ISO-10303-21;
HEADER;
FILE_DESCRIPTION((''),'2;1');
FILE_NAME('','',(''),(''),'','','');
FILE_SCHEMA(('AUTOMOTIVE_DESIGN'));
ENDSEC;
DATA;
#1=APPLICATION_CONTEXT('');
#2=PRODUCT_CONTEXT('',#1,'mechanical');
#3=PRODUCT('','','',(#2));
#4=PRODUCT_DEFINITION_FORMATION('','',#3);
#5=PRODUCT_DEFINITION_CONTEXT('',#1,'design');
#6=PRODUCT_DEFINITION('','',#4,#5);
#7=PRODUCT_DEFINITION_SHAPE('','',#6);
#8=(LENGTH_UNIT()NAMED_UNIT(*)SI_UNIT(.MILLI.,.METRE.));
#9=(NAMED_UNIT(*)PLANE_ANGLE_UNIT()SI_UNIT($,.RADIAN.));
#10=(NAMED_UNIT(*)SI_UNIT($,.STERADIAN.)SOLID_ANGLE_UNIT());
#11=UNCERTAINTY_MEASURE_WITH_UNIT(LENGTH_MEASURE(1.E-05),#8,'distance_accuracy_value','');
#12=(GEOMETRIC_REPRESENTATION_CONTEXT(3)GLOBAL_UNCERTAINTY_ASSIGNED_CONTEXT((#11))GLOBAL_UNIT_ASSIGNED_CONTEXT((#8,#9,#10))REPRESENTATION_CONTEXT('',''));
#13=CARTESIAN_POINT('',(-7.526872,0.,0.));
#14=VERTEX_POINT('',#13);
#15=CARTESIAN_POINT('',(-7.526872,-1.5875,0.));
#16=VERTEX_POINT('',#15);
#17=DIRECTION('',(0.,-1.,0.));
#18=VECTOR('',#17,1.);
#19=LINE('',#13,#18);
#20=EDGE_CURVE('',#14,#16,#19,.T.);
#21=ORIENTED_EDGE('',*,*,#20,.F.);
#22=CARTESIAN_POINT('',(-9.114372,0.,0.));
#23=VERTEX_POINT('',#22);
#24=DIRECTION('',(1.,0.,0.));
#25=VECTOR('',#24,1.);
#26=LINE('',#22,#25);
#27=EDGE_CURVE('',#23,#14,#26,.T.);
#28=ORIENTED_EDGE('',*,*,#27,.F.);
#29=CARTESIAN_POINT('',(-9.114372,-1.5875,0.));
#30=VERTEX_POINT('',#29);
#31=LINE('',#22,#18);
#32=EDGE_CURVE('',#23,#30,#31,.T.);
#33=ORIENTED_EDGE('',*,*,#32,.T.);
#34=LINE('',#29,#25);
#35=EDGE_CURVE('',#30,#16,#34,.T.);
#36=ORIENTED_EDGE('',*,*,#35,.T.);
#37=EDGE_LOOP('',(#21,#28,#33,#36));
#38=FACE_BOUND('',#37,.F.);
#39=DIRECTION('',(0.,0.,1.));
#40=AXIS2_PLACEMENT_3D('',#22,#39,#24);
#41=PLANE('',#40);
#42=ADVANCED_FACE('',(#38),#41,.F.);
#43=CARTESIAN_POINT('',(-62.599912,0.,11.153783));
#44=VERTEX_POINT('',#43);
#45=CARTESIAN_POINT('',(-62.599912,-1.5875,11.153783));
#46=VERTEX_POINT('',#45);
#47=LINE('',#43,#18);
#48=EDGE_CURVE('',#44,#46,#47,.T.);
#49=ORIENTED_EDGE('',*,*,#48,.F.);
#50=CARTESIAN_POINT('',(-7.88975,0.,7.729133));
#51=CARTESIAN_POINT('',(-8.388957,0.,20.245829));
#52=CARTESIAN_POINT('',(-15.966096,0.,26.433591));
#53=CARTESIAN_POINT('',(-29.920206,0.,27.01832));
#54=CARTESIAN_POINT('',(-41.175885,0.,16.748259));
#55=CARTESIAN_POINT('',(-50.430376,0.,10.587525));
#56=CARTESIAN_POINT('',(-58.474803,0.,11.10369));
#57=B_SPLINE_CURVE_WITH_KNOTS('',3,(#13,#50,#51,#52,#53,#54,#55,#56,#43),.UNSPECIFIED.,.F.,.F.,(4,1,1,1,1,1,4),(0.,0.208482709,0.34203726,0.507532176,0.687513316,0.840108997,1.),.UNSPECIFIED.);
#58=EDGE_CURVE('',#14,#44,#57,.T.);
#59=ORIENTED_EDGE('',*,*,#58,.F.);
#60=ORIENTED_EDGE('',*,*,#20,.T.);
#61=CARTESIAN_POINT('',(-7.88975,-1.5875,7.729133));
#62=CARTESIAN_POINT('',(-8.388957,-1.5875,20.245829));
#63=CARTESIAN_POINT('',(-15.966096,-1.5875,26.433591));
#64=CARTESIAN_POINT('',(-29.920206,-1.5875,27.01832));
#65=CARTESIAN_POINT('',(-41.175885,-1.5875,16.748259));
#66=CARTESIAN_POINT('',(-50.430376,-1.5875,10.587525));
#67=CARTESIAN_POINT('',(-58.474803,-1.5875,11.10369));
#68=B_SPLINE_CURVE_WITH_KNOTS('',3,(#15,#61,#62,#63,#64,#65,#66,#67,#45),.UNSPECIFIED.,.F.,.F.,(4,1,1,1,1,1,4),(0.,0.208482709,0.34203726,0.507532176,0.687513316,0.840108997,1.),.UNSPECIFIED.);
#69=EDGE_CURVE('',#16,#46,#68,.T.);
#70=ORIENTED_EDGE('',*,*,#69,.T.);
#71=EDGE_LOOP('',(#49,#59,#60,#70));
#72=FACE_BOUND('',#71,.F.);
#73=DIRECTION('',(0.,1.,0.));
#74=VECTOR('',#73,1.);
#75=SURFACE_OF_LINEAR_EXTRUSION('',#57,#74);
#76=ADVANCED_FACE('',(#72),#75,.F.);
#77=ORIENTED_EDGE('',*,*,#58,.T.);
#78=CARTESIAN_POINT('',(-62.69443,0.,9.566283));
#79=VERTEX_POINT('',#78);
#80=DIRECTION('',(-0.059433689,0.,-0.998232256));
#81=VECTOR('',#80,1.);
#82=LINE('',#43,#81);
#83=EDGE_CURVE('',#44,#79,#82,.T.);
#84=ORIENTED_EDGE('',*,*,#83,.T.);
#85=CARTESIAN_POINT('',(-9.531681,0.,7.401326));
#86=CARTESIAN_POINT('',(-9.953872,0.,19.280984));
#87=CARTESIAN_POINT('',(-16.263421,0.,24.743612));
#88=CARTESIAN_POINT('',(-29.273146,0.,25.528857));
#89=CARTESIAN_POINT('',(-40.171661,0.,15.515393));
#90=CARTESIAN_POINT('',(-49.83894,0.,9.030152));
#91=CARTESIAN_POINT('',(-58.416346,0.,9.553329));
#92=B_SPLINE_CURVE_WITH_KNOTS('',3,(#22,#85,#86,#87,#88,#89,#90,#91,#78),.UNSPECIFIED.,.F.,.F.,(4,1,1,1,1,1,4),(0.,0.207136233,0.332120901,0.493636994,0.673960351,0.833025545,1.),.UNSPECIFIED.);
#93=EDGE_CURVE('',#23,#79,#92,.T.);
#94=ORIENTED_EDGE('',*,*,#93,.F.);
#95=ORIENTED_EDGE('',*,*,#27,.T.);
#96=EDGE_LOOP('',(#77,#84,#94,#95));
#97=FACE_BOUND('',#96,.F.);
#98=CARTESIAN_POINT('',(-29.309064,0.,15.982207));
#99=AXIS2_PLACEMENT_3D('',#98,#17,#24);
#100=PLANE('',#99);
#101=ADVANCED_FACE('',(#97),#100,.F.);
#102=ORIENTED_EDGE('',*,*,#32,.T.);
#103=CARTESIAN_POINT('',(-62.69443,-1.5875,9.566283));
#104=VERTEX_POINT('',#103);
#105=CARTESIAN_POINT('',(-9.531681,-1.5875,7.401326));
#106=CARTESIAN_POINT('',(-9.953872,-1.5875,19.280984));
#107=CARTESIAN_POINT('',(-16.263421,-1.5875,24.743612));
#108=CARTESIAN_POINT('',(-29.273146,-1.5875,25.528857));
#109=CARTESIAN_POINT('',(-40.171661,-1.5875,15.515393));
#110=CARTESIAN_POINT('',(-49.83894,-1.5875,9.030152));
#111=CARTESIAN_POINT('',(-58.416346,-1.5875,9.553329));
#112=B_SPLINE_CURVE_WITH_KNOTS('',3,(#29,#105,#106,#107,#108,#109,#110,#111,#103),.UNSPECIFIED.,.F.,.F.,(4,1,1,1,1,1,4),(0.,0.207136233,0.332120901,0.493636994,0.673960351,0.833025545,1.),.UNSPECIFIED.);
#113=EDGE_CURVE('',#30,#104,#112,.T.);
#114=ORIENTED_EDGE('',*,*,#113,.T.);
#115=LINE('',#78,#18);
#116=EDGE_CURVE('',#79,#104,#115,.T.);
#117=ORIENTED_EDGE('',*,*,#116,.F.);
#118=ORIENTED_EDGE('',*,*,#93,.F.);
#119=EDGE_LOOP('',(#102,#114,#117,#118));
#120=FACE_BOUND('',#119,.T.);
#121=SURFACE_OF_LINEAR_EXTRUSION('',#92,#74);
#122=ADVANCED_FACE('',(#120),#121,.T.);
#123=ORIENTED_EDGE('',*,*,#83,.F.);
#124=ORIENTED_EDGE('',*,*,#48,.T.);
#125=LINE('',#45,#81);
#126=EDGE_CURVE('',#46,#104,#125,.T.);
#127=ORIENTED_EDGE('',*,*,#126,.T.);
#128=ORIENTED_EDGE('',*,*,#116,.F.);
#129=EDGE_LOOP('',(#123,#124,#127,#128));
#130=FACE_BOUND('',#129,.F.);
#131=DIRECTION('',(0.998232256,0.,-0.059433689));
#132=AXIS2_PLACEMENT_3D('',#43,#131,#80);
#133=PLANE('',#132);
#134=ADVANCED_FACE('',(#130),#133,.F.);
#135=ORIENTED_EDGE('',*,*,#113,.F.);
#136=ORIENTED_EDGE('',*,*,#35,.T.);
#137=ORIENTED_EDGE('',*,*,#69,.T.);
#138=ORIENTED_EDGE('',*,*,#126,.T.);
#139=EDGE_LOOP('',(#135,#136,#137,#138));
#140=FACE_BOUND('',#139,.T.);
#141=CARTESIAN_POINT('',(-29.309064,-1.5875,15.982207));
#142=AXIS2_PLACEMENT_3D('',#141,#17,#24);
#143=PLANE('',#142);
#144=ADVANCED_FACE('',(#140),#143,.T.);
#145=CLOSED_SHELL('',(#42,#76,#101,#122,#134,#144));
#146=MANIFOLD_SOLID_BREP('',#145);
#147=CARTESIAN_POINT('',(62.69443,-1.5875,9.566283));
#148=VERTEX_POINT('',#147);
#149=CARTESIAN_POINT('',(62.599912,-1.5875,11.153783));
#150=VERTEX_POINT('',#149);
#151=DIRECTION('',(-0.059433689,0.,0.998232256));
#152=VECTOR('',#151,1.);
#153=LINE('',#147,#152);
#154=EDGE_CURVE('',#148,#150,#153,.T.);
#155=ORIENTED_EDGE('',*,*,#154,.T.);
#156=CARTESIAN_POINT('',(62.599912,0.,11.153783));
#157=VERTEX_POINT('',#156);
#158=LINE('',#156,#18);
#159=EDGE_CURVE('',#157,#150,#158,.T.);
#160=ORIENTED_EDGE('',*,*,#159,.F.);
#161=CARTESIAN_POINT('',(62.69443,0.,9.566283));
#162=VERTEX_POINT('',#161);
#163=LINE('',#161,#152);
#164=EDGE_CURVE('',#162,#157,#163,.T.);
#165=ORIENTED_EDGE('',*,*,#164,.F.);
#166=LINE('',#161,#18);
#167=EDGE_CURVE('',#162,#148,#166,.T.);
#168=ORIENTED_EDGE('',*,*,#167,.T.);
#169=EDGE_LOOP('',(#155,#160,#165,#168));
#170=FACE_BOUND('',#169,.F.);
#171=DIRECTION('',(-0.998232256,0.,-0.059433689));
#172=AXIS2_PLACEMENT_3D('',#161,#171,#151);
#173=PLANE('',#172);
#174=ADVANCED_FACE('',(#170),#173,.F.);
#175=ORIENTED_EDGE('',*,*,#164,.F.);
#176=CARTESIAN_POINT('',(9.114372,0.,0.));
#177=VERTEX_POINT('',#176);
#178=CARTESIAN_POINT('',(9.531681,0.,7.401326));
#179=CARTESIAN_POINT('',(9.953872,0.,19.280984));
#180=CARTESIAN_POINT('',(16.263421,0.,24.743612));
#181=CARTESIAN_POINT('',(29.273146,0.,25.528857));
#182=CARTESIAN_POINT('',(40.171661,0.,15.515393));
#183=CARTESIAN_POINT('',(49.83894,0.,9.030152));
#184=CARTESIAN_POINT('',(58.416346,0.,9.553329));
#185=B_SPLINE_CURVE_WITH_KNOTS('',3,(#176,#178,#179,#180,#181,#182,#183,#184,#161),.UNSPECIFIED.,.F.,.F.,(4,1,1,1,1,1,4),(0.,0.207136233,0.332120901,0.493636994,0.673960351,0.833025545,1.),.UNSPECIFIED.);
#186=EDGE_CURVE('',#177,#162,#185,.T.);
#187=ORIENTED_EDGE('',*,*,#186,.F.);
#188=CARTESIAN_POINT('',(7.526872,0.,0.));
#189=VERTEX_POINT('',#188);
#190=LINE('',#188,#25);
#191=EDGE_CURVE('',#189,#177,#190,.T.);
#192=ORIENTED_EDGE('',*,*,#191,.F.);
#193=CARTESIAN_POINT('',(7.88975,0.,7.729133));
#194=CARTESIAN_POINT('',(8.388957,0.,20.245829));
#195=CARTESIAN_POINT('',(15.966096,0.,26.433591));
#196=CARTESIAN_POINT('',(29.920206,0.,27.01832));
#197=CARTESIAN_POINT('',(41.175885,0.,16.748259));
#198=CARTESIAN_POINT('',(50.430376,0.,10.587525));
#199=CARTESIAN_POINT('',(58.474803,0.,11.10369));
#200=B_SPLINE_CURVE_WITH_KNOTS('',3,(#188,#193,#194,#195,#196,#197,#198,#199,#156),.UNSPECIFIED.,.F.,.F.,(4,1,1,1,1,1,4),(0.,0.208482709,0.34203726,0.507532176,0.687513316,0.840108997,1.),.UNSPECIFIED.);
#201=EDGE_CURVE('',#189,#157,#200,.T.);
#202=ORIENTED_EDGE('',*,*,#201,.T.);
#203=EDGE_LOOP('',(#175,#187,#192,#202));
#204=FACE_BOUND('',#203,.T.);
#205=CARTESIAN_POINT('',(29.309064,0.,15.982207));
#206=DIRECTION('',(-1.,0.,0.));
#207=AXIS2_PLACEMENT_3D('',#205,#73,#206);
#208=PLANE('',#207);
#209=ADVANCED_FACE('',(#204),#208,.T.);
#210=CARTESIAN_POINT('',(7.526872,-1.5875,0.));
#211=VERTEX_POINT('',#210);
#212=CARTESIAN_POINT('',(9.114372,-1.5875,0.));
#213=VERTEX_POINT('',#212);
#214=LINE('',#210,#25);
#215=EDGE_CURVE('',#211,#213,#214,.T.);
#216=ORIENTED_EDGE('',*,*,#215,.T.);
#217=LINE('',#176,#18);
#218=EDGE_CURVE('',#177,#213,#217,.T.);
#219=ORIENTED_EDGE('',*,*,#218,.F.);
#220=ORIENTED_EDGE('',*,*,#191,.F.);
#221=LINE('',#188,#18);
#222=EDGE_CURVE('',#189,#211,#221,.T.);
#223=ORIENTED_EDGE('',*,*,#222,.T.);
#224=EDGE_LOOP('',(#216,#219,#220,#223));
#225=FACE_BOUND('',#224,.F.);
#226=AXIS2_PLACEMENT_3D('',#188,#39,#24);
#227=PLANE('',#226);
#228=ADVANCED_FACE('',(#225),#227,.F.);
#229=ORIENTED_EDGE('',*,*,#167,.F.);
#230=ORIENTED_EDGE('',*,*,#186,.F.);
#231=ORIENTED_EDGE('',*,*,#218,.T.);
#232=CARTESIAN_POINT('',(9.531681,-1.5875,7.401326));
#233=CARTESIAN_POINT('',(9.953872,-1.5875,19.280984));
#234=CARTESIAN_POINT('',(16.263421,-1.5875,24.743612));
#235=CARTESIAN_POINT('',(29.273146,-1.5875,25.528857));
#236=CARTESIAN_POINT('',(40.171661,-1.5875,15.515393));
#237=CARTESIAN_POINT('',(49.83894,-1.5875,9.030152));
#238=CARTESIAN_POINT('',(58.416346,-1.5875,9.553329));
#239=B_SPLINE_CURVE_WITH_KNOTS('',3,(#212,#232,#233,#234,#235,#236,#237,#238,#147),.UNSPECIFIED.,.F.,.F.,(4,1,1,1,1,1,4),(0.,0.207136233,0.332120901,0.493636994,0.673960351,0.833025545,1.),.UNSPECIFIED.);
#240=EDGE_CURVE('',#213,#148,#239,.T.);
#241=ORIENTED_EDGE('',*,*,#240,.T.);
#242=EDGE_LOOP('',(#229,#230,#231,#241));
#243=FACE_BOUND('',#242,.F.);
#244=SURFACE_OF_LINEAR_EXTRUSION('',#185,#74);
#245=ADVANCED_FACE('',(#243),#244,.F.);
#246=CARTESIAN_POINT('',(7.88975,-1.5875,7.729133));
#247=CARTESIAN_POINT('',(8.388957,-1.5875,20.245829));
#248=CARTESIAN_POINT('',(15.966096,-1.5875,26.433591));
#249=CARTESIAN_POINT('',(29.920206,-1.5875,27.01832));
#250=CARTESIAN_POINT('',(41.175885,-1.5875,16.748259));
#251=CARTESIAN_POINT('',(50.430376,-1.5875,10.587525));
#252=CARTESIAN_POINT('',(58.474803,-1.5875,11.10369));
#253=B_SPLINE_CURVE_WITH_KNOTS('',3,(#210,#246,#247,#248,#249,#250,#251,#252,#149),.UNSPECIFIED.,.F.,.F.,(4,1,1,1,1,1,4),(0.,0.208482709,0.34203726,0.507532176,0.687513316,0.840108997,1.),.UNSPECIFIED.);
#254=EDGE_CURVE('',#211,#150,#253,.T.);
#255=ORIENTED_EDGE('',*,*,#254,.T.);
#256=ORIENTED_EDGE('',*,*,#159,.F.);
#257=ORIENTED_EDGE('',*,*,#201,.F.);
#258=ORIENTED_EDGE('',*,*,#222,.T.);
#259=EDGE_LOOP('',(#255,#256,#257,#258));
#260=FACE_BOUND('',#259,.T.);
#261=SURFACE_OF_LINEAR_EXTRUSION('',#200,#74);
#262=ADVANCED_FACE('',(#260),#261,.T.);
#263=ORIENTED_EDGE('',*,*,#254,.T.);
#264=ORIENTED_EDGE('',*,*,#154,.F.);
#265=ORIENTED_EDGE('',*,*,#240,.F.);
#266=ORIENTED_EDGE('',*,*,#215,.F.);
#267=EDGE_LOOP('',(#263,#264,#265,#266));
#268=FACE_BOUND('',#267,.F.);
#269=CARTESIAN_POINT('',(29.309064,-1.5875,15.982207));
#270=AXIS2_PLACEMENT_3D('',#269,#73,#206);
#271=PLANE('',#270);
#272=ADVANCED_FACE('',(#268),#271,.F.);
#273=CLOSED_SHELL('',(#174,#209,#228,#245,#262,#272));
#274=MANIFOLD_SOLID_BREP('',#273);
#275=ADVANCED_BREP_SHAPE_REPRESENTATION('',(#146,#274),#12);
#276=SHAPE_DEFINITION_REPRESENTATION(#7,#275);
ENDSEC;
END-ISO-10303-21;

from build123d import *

# Parameters (mm, degrees)
F1_DEPTH = 1.5875


# Not quite as in the source:
# - a length typed as a fraction of an inch, garbled in the dataset ("3 / 203.2 mm" for 3/8 in), is restored


with BuildPart() as f1:
    # F0 (on Front) → F1 (new body)
    with BuildSketch(Plane.XZ):
        with BuildLine():
            Line((-9.1143716127, 0), (-7.5268716127, 0))
            add(Edge.make_bspline(
                [(-7.5268716127, 0), (-7.8897503094, 7.7291327478), (-8.3889565818, 20.2458286021), (-15.9660956947, 26.4335907496), (-29.9202055315, 27.0183201289), (-41.1758854937, 16.7482591558), (-50.4303761466, 10.5875251753), (-58.4748027147, 11.1036899728), (-62.5999122858, 11.1537828535)],
                knots=[0, 0, 0, 0, 0.2084827091, 0.3420372599, 0.5075321761, 0.6875133158, 0.8401089973, 1, 1, 1, 1], degree=3))
            Line((-62.5999122858, 11.1537828535), (-62.6944303513, 9.5662828535))
            add(Edge.make_bspline(
                [(-9.1143716127, 0), (-9.5316806414, 7.4013263291), (-9.9538721904, 19.2809836646), (-16.2634207351, 24.7436120288), (-29.273146146, 25.528857291), (-40.1716605131, 15.515392704), (-49.838939503, 9.0301520056), (-58.4163464612, 9.5533290209), (-62.6944303513, 9.5662828535)],
                knots=[0, 0, 0, 0, 0.2071362327, 0.3321209014, 0.4936369942, 0.6739603513, 0.8330255453, 1, 1, 1, 1], degree=3))
        make_face()
    extrude(amount=F1_DEPTH)


with BuildPart() as f1b:
    # F0 (on Front) → F1, piece 2 (new body)
    with BuildSketch(Plane.XZ):
        with BuildLine():
            add(Edge.make_bspline(
                [(7.5268716127, 0), (7.8897503094, 7.7291327478), (8.3889565818, 20.2458286021), (15.9660956947, 26.4335907496), (29.9202055315, 27.0183201289), (41.1758854937, 16.7482591558), (50.4303761466, 10.5875251753), (58.4748027147, 11.1036899728), (62.5999122858, 11.1537828535)],
                knots=[0, 0, 0, 0, 0.2084827091, 0.3420372599, 0.5075321761, 0.6875133158, 0.8401089973, 1, 1, 1, 1], degree=3))
            Line((7.5268716127, 0), (9.1143716127, 0))
            add(Edge.make_bspline(
                [(9.1143716127, 0), (9.5316806414, 7.4013263291), (9.9538721904, 19.2809836646), (16.2634207351, 24.7436120288), (29.273146146, 25.528857291), (40.1716605131, 15.515392704), (49.838939503, 9.0301520056), (58.4163464612, 9.5533290209), (62.6944303513, 9.5662828535)],
                knots=[0, 0, 0, 0, 0.2071362327, 0.3321209014, 0.4936369942, 0.6739603513, 0.8330255453, 1, 1, 1, 1], degree=3))
            Line((62.6944303513, 9.5662828535), (62.5999122858, 11.1537828535))
        make_face()
    extrude(amount=F1_DEPTH)


solid = Compound([f1.part, f1b.part])
